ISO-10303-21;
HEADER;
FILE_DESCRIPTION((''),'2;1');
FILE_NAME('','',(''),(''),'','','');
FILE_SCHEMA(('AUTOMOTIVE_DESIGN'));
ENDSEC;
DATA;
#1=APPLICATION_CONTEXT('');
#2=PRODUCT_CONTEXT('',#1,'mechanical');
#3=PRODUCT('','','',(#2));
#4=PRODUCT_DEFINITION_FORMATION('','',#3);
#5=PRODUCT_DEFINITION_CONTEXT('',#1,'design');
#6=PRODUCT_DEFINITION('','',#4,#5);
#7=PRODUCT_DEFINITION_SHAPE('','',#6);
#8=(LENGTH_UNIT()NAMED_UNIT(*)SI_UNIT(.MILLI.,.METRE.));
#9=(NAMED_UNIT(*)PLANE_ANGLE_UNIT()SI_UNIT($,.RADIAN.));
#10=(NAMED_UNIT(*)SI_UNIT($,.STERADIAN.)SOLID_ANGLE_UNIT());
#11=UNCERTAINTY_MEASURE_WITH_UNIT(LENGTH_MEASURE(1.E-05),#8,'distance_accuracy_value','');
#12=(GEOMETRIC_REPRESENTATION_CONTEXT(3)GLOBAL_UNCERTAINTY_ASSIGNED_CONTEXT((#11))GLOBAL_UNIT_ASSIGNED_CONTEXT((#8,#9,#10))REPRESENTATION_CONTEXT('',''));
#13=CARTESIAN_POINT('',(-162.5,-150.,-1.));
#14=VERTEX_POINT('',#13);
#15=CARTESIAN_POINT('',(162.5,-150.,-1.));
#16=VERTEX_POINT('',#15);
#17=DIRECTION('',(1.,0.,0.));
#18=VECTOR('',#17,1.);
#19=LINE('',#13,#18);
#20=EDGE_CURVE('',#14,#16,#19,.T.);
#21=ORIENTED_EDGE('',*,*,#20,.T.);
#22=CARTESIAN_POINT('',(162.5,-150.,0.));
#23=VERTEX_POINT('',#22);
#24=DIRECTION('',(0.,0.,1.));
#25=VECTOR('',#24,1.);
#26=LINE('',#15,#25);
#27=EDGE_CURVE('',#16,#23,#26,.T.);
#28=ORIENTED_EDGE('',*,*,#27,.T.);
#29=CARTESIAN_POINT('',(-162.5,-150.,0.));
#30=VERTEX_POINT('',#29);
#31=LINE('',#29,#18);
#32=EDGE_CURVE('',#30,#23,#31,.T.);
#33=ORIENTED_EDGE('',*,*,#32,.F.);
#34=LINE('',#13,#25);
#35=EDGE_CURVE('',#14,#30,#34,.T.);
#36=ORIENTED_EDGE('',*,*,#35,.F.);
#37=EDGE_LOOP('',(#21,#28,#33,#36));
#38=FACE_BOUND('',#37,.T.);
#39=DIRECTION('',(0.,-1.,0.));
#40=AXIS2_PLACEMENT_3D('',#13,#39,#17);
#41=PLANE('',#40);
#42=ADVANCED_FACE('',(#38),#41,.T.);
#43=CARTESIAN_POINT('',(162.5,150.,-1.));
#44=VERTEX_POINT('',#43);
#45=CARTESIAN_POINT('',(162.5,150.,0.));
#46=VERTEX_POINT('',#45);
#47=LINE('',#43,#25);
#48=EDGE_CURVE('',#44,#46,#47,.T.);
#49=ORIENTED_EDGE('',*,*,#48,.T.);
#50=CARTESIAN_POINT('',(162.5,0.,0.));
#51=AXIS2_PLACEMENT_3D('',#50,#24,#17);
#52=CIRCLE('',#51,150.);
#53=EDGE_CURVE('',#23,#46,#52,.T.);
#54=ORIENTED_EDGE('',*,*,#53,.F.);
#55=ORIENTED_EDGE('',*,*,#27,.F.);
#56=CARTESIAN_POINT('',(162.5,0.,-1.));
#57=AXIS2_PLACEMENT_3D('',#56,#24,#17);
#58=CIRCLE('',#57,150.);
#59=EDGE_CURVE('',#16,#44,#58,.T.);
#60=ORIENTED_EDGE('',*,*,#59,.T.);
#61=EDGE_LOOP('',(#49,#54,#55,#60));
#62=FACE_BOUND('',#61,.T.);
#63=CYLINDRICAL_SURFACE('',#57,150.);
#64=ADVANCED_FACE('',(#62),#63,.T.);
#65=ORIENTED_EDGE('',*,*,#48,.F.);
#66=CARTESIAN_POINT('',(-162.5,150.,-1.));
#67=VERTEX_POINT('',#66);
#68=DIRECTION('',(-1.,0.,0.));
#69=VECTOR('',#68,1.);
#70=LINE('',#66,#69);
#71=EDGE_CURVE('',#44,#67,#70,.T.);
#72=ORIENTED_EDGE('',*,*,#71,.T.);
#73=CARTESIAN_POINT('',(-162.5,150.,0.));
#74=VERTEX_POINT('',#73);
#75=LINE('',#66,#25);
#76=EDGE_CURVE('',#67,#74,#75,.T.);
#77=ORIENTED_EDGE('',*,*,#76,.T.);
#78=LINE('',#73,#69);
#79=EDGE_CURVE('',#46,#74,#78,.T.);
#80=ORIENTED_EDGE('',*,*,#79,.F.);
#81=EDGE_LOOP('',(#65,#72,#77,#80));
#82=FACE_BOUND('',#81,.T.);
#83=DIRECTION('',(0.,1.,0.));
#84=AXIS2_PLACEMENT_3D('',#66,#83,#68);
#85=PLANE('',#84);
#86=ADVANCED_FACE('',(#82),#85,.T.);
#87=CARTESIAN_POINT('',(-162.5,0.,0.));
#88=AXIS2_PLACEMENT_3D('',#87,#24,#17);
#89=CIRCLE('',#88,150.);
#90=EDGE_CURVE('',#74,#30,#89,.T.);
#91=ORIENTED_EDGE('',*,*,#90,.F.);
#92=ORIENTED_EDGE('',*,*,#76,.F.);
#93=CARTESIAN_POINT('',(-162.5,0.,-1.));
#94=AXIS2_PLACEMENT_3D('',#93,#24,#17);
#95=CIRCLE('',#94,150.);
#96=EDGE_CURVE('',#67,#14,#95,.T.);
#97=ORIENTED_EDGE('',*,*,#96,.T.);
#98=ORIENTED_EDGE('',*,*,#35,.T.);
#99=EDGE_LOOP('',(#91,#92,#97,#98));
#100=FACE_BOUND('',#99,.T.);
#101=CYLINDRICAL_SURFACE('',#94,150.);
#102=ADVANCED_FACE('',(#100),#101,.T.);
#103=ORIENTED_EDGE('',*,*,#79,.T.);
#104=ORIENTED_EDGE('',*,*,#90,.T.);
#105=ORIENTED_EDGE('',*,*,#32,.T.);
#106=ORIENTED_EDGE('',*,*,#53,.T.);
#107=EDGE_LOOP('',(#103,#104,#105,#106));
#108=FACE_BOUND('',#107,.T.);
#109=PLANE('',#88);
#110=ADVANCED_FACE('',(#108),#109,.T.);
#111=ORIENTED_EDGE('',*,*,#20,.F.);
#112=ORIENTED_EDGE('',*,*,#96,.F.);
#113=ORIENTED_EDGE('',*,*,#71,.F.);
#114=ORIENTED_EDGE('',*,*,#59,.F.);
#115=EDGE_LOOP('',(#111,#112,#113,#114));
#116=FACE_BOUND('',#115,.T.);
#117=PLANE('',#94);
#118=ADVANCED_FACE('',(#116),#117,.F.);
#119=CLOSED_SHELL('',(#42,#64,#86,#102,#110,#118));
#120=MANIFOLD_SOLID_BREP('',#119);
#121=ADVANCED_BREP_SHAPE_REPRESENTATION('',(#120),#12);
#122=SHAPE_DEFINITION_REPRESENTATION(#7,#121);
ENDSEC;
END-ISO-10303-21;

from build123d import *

# Parameters (mm, degrees)
BASE_FLANGE1_DEPTH = 1


# Sheet-metal steps are written as plain solids
with BuildPart() as part:
    # Sketch1 → Base-Flange1 (new body)
    with BuildSketch(Plane.XY):
        with BuildLine():
            Line((-162.5, 150), (162.5, 150))
            ThreePointArc((162.5, 150), (312.5, 0), (162.5, -150))
            Line((162.5, -150), (-162.5, -150))
            ThreePointArc((-162.5, -150), (-312.5, 0), (-162.5, 150))
        make_face()
    extrude(amount=-BASE_FLANGE1_DEPTH)


solid = part.part
